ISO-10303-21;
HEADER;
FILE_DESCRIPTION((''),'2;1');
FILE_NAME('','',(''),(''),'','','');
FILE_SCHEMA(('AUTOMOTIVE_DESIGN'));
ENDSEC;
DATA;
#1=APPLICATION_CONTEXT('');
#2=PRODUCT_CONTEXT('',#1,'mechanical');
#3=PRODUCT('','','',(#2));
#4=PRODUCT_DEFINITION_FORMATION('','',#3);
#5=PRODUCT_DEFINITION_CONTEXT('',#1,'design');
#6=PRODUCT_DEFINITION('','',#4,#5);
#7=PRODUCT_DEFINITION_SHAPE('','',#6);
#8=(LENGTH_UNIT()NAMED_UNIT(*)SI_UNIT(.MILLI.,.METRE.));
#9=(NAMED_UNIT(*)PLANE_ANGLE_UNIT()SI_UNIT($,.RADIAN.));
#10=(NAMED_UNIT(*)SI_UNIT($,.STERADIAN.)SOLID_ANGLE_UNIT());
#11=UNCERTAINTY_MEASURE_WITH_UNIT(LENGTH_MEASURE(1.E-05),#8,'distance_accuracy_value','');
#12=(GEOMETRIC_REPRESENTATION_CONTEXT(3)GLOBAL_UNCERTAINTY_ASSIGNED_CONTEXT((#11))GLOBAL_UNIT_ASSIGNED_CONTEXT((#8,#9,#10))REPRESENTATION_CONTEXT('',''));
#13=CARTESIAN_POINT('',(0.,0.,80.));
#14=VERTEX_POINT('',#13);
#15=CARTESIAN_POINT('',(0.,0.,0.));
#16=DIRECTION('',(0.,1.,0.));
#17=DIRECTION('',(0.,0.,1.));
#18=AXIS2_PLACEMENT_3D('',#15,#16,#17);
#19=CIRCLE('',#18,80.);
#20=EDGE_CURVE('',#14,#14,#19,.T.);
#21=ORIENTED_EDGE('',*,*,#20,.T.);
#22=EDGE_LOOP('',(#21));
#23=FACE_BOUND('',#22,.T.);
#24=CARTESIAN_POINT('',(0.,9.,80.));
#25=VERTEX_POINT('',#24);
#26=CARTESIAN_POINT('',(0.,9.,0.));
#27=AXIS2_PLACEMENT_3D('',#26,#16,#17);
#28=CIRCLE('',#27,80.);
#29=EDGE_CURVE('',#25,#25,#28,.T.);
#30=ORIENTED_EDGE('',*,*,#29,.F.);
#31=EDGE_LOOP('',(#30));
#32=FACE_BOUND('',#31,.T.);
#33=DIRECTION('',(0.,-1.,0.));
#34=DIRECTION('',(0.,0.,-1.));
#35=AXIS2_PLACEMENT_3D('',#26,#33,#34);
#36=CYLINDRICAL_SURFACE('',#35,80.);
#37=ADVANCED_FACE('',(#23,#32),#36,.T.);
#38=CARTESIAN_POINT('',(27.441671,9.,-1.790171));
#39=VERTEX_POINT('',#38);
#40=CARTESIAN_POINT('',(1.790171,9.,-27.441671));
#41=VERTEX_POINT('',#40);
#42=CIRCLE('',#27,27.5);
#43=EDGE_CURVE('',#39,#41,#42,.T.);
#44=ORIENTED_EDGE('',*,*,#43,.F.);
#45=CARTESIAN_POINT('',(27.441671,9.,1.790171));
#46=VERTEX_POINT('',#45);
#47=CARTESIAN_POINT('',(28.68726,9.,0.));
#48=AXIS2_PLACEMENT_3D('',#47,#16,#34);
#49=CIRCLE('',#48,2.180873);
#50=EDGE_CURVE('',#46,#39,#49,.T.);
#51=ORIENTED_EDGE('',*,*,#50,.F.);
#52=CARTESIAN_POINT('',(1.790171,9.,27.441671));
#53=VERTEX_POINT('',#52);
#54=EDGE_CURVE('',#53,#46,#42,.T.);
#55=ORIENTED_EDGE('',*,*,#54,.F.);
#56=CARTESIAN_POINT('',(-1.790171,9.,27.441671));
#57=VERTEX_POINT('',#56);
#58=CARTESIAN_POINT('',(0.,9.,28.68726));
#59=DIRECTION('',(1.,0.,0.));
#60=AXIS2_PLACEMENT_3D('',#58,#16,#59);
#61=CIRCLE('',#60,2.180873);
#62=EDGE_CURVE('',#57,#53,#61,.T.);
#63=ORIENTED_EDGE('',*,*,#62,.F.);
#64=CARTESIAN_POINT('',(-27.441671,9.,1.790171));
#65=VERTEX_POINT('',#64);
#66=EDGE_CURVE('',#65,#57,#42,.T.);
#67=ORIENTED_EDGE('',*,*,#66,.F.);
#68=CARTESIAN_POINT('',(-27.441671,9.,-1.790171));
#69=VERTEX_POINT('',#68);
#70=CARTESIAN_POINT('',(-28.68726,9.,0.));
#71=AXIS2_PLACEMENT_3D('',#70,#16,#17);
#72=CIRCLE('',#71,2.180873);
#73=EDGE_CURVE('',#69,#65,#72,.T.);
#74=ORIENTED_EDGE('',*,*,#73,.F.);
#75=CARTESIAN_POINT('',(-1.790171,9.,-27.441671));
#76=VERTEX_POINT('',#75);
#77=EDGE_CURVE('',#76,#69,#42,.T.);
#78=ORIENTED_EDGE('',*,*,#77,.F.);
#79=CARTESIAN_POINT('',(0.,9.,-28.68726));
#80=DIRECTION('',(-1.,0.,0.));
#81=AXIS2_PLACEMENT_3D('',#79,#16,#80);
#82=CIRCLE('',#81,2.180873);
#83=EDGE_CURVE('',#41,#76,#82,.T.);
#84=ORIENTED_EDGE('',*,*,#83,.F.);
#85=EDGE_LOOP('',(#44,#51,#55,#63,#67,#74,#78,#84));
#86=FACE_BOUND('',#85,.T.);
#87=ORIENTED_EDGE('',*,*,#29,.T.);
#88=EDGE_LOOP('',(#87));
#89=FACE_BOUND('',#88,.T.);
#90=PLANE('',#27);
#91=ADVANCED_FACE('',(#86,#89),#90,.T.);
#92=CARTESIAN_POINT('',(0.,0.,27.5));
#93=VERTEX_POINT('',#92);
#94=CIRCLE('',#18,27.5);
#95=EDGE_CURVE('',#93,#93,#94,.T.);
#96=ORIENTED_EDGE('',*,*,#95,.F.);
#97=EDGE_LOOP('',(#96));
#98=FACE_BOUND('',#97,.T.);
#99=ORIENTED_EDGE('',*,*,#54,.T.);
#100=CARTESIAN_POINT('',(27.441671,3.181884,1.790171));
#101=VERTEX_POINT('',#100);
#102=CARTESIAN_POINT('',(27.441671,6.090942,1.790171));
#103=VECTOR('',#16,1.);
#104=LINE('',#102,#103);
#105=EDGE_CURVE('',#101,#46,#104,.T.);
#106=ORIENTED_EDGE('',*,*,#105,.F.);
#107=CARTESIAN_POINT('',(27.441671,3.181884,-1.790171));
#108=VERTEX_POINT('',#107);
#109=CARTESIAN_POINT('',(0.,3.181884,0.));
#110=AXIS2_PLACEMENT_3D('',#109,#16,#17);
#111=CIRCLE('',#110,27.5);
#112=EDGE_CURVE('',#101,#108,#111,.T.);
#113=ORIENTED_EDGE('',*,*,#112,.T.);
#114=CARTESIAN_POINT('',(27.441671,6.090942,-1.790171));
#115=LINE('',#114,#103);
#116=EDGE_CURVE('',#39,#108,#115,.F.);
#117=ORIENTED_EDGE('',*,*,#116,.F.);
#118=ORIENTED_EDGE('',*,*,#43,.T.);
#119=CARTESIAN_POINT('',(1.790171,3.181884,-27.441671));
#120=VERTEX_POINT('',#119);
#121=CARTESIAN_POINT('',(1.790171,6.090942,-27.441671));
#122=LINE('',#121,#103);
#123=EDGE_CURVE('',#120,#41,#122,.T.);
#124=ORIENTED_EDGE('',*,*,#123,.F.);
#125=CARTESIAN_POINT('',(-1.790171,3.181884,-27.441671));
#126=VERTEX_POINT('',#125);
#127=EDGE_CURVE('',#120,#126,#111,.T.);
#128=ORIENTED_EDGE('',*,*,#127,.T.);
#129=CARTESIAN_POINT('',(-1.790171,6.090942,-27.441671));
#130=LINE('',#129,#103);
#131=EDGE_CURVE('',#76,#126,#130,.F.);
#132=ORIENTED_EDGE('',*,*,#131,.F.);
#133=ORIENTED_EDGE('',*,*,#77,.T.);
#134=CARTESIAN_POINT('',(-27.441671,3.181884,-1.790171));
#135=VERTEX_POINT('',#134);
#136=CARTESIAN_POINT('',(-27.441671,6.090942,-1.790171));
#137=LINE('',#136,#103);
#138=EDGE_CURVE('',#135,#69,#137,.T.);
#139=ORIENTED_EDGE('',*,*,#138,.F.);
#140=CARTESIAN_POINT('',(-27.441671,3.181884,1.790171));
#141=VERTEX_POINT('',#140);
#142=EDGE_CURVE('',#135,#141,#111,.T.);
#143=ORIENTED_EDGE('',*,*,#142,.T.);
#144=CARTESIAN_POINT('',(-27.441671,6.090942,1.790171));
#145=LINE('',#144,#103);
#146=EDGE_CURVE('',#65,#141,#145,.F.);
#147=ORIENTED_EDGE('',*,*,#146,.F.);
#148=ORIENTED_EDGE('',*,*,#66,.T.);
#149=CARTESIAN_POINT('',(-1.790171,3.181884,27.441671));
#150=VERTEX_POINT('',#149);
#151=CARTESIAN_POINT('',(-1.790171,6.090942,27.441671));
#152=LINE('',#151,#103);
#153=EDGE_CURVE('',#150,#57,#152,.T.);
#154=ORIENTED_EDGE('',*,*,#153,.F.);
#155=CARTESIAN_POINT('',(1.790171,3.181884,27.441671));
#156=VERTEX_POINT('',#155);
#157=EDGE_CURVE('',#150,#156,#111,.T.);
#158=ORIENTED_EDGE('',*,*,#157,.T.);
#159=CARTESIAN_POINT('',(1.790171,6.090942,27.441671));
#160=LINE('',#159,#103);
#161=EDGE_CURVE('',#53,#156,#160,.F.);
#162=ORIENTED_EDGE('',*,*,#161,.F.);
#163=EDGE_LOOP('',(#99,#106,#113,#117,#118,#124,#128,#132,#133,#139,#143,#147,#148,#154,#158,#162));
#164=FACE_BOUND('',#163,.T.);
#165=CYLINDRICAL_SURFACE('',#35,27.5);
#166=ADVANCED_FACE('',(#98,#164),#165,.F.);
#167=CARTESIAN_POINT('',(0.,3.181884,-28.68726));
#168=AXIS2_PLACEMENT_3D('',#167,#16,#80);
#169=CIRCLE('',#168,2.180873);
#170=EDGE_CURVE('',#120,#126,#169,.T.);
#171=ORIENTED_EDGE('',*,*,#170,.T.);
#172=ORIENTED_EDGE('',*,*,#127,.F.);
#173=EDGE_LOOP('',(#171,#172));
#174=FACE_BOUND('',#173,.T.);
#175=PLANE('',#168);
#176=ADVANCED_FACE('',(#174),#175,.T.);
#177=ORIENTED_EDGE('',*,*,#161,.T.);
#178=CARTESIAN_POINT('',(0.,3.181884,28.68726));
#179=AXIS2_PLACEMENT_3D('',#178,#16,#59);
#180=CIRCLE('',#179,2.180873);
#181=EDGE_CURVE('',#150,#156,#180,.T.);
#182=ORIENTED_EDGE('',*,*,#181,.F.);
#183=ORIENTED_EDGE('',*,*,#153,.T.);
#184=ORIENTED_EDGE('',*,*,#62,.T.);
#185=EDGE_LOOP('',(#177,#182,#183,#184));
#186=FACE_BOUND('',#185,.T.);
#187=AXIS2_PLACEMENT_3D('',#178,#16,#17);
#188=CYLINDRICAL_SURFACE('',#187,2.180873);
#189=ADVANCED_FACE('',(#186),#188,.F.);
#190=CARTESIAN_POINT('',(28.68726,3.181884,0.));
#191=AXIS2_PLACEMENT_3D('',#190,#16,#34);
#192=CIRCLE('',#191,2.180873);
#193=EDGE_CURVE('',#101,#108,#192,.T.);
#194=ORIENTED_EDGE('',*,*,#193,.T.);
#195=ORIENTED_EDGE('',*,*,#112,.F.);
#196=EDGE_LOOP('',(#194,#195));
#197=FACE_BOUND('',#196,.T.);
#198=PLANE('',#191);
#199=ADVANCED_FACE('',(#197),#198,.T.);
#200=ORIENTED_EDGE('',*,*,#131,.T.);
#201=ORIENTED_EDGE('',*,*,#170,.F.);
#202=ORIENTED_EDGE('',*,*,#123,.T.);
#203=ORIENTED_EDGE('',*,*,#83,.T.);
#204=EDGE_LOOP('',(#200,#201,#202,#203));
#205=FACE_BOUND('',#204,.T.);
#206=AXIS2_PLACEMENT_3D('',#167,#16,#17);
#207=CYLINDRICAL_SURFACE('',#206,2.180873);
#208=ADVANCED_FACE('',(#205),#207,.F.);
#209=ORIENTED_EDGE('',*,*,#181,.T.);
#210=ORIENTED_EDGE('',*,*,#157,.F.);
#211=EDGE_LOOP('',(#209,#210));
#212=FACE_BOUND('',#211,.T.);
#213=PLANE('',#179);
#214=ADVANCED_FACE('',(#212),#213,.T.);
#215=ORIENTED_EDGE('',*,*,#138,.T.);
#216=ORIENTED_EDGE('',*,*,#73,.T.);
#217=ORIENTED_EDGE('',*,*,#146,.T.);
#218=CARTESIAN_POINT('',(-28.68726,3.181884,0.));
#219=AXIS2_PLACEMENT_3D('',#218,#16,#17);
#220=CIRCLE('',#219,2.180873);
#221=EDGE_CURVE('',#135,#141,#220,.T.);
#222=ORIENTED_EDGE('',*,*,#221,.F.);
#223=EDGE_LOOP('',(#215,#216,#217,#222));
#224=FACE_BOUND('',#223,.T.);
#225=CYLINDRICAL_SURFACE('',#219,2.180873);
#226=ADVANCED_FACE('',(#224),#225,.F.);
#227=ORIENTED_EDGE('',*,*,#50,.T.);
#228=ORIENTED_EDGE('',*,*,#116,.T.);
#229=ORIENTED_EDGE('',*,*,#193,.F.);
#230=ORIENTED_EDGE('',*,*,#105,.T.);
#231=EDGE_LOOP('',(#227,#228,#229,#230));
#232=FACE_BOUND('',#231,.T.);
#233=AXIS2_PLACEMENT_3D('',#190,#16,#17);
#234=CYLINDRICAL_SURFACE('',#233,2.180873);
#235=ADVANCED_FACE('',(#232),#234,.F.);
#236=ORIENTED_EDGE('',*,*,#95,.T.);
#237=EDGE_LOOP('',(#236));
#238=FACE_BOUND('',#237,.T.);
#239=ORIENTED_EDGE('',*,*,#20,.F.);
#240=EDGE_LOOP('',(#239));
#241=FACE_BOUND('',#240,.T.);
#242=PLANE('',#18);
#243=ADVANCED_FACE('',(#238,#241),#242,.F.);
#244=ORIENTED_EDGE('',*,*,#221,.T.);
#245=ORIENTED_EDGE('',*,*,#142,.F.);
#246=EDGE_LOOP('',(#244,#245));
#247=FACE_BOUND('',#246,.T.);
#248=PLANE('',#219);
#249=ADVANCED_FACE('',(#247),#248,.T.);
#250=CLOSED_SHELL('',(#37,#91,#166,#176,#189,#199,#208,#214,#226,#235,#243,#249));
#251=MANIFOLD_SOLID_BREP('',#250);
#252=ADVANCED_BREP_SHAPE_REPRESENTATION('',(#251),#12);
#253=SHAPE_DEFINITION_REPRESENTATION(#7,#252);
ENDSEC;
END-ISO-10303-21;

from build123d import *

# Parameters (mm, degrees)
SKETCH1_R           = 80
BOSS_EXTRUDE1_DEPTH = 9
SKETCH2_R           = 27.5
CUT_EXTRUDE1_DEPTH  = 114.494493258
SKETCH3_R           = 2.180872626
CUT_EXTRUDE2_DEPTH  = 5.818115606
CIRPATTERN1_COUNT   = 4


with BuildPart() as part:
    # Sketch1 → Boss-Extrude1 (new body)
    with BuildSketch(Plane(origin=(0, 0, 0), x_dir=(1, 0, 0), z_dir=(0, 1, 0))):
        Circle(SKETCH1_R)
    extrude(amount=BOSS_EXTRUDE1_DEPTH)

    # Sketch2 → Cut-Extrude1 (cut, through all)
    with BuildSketch(Plane(origin=(0, 0, 0), x_dir=(1, 0, 0), z_dir=(0, 1, 0))):
        Circle(SKETCH2_R)
    extrude(amount=CUT_EXTRUDE1_DEPTH, mode=Mode.SUBTRACT)

    # Sketch3 → Cut-Extrude2 (cut)
    with BuildSketch(Plane(origin=(0, 9, 0), x_dir=(1, 0, 0), z_dir=(0, 1, 0))):
        with Locations((-28.687260225, 0)):
            Circle(SKETCH3_R)
    cut_extrude2 = extrude(amount=-CUT_EXTRUDE2_DEPTH, mode=Mode.SUBTRACT)

    # CirPattern1: Cut-Extrude2 ×4 about axis
    cirpattern1_axis = Axis((0, 0, 0), (0, 1, 0))
    for i in range(1, CIRPATTERN1_COUNT):
        add(cut_extrude2.rotate(cirpattern1_axis, i * 360 / CIRPATTERN1_COUNT), mode=Mode.SUBTRACT)


solid = part.part
